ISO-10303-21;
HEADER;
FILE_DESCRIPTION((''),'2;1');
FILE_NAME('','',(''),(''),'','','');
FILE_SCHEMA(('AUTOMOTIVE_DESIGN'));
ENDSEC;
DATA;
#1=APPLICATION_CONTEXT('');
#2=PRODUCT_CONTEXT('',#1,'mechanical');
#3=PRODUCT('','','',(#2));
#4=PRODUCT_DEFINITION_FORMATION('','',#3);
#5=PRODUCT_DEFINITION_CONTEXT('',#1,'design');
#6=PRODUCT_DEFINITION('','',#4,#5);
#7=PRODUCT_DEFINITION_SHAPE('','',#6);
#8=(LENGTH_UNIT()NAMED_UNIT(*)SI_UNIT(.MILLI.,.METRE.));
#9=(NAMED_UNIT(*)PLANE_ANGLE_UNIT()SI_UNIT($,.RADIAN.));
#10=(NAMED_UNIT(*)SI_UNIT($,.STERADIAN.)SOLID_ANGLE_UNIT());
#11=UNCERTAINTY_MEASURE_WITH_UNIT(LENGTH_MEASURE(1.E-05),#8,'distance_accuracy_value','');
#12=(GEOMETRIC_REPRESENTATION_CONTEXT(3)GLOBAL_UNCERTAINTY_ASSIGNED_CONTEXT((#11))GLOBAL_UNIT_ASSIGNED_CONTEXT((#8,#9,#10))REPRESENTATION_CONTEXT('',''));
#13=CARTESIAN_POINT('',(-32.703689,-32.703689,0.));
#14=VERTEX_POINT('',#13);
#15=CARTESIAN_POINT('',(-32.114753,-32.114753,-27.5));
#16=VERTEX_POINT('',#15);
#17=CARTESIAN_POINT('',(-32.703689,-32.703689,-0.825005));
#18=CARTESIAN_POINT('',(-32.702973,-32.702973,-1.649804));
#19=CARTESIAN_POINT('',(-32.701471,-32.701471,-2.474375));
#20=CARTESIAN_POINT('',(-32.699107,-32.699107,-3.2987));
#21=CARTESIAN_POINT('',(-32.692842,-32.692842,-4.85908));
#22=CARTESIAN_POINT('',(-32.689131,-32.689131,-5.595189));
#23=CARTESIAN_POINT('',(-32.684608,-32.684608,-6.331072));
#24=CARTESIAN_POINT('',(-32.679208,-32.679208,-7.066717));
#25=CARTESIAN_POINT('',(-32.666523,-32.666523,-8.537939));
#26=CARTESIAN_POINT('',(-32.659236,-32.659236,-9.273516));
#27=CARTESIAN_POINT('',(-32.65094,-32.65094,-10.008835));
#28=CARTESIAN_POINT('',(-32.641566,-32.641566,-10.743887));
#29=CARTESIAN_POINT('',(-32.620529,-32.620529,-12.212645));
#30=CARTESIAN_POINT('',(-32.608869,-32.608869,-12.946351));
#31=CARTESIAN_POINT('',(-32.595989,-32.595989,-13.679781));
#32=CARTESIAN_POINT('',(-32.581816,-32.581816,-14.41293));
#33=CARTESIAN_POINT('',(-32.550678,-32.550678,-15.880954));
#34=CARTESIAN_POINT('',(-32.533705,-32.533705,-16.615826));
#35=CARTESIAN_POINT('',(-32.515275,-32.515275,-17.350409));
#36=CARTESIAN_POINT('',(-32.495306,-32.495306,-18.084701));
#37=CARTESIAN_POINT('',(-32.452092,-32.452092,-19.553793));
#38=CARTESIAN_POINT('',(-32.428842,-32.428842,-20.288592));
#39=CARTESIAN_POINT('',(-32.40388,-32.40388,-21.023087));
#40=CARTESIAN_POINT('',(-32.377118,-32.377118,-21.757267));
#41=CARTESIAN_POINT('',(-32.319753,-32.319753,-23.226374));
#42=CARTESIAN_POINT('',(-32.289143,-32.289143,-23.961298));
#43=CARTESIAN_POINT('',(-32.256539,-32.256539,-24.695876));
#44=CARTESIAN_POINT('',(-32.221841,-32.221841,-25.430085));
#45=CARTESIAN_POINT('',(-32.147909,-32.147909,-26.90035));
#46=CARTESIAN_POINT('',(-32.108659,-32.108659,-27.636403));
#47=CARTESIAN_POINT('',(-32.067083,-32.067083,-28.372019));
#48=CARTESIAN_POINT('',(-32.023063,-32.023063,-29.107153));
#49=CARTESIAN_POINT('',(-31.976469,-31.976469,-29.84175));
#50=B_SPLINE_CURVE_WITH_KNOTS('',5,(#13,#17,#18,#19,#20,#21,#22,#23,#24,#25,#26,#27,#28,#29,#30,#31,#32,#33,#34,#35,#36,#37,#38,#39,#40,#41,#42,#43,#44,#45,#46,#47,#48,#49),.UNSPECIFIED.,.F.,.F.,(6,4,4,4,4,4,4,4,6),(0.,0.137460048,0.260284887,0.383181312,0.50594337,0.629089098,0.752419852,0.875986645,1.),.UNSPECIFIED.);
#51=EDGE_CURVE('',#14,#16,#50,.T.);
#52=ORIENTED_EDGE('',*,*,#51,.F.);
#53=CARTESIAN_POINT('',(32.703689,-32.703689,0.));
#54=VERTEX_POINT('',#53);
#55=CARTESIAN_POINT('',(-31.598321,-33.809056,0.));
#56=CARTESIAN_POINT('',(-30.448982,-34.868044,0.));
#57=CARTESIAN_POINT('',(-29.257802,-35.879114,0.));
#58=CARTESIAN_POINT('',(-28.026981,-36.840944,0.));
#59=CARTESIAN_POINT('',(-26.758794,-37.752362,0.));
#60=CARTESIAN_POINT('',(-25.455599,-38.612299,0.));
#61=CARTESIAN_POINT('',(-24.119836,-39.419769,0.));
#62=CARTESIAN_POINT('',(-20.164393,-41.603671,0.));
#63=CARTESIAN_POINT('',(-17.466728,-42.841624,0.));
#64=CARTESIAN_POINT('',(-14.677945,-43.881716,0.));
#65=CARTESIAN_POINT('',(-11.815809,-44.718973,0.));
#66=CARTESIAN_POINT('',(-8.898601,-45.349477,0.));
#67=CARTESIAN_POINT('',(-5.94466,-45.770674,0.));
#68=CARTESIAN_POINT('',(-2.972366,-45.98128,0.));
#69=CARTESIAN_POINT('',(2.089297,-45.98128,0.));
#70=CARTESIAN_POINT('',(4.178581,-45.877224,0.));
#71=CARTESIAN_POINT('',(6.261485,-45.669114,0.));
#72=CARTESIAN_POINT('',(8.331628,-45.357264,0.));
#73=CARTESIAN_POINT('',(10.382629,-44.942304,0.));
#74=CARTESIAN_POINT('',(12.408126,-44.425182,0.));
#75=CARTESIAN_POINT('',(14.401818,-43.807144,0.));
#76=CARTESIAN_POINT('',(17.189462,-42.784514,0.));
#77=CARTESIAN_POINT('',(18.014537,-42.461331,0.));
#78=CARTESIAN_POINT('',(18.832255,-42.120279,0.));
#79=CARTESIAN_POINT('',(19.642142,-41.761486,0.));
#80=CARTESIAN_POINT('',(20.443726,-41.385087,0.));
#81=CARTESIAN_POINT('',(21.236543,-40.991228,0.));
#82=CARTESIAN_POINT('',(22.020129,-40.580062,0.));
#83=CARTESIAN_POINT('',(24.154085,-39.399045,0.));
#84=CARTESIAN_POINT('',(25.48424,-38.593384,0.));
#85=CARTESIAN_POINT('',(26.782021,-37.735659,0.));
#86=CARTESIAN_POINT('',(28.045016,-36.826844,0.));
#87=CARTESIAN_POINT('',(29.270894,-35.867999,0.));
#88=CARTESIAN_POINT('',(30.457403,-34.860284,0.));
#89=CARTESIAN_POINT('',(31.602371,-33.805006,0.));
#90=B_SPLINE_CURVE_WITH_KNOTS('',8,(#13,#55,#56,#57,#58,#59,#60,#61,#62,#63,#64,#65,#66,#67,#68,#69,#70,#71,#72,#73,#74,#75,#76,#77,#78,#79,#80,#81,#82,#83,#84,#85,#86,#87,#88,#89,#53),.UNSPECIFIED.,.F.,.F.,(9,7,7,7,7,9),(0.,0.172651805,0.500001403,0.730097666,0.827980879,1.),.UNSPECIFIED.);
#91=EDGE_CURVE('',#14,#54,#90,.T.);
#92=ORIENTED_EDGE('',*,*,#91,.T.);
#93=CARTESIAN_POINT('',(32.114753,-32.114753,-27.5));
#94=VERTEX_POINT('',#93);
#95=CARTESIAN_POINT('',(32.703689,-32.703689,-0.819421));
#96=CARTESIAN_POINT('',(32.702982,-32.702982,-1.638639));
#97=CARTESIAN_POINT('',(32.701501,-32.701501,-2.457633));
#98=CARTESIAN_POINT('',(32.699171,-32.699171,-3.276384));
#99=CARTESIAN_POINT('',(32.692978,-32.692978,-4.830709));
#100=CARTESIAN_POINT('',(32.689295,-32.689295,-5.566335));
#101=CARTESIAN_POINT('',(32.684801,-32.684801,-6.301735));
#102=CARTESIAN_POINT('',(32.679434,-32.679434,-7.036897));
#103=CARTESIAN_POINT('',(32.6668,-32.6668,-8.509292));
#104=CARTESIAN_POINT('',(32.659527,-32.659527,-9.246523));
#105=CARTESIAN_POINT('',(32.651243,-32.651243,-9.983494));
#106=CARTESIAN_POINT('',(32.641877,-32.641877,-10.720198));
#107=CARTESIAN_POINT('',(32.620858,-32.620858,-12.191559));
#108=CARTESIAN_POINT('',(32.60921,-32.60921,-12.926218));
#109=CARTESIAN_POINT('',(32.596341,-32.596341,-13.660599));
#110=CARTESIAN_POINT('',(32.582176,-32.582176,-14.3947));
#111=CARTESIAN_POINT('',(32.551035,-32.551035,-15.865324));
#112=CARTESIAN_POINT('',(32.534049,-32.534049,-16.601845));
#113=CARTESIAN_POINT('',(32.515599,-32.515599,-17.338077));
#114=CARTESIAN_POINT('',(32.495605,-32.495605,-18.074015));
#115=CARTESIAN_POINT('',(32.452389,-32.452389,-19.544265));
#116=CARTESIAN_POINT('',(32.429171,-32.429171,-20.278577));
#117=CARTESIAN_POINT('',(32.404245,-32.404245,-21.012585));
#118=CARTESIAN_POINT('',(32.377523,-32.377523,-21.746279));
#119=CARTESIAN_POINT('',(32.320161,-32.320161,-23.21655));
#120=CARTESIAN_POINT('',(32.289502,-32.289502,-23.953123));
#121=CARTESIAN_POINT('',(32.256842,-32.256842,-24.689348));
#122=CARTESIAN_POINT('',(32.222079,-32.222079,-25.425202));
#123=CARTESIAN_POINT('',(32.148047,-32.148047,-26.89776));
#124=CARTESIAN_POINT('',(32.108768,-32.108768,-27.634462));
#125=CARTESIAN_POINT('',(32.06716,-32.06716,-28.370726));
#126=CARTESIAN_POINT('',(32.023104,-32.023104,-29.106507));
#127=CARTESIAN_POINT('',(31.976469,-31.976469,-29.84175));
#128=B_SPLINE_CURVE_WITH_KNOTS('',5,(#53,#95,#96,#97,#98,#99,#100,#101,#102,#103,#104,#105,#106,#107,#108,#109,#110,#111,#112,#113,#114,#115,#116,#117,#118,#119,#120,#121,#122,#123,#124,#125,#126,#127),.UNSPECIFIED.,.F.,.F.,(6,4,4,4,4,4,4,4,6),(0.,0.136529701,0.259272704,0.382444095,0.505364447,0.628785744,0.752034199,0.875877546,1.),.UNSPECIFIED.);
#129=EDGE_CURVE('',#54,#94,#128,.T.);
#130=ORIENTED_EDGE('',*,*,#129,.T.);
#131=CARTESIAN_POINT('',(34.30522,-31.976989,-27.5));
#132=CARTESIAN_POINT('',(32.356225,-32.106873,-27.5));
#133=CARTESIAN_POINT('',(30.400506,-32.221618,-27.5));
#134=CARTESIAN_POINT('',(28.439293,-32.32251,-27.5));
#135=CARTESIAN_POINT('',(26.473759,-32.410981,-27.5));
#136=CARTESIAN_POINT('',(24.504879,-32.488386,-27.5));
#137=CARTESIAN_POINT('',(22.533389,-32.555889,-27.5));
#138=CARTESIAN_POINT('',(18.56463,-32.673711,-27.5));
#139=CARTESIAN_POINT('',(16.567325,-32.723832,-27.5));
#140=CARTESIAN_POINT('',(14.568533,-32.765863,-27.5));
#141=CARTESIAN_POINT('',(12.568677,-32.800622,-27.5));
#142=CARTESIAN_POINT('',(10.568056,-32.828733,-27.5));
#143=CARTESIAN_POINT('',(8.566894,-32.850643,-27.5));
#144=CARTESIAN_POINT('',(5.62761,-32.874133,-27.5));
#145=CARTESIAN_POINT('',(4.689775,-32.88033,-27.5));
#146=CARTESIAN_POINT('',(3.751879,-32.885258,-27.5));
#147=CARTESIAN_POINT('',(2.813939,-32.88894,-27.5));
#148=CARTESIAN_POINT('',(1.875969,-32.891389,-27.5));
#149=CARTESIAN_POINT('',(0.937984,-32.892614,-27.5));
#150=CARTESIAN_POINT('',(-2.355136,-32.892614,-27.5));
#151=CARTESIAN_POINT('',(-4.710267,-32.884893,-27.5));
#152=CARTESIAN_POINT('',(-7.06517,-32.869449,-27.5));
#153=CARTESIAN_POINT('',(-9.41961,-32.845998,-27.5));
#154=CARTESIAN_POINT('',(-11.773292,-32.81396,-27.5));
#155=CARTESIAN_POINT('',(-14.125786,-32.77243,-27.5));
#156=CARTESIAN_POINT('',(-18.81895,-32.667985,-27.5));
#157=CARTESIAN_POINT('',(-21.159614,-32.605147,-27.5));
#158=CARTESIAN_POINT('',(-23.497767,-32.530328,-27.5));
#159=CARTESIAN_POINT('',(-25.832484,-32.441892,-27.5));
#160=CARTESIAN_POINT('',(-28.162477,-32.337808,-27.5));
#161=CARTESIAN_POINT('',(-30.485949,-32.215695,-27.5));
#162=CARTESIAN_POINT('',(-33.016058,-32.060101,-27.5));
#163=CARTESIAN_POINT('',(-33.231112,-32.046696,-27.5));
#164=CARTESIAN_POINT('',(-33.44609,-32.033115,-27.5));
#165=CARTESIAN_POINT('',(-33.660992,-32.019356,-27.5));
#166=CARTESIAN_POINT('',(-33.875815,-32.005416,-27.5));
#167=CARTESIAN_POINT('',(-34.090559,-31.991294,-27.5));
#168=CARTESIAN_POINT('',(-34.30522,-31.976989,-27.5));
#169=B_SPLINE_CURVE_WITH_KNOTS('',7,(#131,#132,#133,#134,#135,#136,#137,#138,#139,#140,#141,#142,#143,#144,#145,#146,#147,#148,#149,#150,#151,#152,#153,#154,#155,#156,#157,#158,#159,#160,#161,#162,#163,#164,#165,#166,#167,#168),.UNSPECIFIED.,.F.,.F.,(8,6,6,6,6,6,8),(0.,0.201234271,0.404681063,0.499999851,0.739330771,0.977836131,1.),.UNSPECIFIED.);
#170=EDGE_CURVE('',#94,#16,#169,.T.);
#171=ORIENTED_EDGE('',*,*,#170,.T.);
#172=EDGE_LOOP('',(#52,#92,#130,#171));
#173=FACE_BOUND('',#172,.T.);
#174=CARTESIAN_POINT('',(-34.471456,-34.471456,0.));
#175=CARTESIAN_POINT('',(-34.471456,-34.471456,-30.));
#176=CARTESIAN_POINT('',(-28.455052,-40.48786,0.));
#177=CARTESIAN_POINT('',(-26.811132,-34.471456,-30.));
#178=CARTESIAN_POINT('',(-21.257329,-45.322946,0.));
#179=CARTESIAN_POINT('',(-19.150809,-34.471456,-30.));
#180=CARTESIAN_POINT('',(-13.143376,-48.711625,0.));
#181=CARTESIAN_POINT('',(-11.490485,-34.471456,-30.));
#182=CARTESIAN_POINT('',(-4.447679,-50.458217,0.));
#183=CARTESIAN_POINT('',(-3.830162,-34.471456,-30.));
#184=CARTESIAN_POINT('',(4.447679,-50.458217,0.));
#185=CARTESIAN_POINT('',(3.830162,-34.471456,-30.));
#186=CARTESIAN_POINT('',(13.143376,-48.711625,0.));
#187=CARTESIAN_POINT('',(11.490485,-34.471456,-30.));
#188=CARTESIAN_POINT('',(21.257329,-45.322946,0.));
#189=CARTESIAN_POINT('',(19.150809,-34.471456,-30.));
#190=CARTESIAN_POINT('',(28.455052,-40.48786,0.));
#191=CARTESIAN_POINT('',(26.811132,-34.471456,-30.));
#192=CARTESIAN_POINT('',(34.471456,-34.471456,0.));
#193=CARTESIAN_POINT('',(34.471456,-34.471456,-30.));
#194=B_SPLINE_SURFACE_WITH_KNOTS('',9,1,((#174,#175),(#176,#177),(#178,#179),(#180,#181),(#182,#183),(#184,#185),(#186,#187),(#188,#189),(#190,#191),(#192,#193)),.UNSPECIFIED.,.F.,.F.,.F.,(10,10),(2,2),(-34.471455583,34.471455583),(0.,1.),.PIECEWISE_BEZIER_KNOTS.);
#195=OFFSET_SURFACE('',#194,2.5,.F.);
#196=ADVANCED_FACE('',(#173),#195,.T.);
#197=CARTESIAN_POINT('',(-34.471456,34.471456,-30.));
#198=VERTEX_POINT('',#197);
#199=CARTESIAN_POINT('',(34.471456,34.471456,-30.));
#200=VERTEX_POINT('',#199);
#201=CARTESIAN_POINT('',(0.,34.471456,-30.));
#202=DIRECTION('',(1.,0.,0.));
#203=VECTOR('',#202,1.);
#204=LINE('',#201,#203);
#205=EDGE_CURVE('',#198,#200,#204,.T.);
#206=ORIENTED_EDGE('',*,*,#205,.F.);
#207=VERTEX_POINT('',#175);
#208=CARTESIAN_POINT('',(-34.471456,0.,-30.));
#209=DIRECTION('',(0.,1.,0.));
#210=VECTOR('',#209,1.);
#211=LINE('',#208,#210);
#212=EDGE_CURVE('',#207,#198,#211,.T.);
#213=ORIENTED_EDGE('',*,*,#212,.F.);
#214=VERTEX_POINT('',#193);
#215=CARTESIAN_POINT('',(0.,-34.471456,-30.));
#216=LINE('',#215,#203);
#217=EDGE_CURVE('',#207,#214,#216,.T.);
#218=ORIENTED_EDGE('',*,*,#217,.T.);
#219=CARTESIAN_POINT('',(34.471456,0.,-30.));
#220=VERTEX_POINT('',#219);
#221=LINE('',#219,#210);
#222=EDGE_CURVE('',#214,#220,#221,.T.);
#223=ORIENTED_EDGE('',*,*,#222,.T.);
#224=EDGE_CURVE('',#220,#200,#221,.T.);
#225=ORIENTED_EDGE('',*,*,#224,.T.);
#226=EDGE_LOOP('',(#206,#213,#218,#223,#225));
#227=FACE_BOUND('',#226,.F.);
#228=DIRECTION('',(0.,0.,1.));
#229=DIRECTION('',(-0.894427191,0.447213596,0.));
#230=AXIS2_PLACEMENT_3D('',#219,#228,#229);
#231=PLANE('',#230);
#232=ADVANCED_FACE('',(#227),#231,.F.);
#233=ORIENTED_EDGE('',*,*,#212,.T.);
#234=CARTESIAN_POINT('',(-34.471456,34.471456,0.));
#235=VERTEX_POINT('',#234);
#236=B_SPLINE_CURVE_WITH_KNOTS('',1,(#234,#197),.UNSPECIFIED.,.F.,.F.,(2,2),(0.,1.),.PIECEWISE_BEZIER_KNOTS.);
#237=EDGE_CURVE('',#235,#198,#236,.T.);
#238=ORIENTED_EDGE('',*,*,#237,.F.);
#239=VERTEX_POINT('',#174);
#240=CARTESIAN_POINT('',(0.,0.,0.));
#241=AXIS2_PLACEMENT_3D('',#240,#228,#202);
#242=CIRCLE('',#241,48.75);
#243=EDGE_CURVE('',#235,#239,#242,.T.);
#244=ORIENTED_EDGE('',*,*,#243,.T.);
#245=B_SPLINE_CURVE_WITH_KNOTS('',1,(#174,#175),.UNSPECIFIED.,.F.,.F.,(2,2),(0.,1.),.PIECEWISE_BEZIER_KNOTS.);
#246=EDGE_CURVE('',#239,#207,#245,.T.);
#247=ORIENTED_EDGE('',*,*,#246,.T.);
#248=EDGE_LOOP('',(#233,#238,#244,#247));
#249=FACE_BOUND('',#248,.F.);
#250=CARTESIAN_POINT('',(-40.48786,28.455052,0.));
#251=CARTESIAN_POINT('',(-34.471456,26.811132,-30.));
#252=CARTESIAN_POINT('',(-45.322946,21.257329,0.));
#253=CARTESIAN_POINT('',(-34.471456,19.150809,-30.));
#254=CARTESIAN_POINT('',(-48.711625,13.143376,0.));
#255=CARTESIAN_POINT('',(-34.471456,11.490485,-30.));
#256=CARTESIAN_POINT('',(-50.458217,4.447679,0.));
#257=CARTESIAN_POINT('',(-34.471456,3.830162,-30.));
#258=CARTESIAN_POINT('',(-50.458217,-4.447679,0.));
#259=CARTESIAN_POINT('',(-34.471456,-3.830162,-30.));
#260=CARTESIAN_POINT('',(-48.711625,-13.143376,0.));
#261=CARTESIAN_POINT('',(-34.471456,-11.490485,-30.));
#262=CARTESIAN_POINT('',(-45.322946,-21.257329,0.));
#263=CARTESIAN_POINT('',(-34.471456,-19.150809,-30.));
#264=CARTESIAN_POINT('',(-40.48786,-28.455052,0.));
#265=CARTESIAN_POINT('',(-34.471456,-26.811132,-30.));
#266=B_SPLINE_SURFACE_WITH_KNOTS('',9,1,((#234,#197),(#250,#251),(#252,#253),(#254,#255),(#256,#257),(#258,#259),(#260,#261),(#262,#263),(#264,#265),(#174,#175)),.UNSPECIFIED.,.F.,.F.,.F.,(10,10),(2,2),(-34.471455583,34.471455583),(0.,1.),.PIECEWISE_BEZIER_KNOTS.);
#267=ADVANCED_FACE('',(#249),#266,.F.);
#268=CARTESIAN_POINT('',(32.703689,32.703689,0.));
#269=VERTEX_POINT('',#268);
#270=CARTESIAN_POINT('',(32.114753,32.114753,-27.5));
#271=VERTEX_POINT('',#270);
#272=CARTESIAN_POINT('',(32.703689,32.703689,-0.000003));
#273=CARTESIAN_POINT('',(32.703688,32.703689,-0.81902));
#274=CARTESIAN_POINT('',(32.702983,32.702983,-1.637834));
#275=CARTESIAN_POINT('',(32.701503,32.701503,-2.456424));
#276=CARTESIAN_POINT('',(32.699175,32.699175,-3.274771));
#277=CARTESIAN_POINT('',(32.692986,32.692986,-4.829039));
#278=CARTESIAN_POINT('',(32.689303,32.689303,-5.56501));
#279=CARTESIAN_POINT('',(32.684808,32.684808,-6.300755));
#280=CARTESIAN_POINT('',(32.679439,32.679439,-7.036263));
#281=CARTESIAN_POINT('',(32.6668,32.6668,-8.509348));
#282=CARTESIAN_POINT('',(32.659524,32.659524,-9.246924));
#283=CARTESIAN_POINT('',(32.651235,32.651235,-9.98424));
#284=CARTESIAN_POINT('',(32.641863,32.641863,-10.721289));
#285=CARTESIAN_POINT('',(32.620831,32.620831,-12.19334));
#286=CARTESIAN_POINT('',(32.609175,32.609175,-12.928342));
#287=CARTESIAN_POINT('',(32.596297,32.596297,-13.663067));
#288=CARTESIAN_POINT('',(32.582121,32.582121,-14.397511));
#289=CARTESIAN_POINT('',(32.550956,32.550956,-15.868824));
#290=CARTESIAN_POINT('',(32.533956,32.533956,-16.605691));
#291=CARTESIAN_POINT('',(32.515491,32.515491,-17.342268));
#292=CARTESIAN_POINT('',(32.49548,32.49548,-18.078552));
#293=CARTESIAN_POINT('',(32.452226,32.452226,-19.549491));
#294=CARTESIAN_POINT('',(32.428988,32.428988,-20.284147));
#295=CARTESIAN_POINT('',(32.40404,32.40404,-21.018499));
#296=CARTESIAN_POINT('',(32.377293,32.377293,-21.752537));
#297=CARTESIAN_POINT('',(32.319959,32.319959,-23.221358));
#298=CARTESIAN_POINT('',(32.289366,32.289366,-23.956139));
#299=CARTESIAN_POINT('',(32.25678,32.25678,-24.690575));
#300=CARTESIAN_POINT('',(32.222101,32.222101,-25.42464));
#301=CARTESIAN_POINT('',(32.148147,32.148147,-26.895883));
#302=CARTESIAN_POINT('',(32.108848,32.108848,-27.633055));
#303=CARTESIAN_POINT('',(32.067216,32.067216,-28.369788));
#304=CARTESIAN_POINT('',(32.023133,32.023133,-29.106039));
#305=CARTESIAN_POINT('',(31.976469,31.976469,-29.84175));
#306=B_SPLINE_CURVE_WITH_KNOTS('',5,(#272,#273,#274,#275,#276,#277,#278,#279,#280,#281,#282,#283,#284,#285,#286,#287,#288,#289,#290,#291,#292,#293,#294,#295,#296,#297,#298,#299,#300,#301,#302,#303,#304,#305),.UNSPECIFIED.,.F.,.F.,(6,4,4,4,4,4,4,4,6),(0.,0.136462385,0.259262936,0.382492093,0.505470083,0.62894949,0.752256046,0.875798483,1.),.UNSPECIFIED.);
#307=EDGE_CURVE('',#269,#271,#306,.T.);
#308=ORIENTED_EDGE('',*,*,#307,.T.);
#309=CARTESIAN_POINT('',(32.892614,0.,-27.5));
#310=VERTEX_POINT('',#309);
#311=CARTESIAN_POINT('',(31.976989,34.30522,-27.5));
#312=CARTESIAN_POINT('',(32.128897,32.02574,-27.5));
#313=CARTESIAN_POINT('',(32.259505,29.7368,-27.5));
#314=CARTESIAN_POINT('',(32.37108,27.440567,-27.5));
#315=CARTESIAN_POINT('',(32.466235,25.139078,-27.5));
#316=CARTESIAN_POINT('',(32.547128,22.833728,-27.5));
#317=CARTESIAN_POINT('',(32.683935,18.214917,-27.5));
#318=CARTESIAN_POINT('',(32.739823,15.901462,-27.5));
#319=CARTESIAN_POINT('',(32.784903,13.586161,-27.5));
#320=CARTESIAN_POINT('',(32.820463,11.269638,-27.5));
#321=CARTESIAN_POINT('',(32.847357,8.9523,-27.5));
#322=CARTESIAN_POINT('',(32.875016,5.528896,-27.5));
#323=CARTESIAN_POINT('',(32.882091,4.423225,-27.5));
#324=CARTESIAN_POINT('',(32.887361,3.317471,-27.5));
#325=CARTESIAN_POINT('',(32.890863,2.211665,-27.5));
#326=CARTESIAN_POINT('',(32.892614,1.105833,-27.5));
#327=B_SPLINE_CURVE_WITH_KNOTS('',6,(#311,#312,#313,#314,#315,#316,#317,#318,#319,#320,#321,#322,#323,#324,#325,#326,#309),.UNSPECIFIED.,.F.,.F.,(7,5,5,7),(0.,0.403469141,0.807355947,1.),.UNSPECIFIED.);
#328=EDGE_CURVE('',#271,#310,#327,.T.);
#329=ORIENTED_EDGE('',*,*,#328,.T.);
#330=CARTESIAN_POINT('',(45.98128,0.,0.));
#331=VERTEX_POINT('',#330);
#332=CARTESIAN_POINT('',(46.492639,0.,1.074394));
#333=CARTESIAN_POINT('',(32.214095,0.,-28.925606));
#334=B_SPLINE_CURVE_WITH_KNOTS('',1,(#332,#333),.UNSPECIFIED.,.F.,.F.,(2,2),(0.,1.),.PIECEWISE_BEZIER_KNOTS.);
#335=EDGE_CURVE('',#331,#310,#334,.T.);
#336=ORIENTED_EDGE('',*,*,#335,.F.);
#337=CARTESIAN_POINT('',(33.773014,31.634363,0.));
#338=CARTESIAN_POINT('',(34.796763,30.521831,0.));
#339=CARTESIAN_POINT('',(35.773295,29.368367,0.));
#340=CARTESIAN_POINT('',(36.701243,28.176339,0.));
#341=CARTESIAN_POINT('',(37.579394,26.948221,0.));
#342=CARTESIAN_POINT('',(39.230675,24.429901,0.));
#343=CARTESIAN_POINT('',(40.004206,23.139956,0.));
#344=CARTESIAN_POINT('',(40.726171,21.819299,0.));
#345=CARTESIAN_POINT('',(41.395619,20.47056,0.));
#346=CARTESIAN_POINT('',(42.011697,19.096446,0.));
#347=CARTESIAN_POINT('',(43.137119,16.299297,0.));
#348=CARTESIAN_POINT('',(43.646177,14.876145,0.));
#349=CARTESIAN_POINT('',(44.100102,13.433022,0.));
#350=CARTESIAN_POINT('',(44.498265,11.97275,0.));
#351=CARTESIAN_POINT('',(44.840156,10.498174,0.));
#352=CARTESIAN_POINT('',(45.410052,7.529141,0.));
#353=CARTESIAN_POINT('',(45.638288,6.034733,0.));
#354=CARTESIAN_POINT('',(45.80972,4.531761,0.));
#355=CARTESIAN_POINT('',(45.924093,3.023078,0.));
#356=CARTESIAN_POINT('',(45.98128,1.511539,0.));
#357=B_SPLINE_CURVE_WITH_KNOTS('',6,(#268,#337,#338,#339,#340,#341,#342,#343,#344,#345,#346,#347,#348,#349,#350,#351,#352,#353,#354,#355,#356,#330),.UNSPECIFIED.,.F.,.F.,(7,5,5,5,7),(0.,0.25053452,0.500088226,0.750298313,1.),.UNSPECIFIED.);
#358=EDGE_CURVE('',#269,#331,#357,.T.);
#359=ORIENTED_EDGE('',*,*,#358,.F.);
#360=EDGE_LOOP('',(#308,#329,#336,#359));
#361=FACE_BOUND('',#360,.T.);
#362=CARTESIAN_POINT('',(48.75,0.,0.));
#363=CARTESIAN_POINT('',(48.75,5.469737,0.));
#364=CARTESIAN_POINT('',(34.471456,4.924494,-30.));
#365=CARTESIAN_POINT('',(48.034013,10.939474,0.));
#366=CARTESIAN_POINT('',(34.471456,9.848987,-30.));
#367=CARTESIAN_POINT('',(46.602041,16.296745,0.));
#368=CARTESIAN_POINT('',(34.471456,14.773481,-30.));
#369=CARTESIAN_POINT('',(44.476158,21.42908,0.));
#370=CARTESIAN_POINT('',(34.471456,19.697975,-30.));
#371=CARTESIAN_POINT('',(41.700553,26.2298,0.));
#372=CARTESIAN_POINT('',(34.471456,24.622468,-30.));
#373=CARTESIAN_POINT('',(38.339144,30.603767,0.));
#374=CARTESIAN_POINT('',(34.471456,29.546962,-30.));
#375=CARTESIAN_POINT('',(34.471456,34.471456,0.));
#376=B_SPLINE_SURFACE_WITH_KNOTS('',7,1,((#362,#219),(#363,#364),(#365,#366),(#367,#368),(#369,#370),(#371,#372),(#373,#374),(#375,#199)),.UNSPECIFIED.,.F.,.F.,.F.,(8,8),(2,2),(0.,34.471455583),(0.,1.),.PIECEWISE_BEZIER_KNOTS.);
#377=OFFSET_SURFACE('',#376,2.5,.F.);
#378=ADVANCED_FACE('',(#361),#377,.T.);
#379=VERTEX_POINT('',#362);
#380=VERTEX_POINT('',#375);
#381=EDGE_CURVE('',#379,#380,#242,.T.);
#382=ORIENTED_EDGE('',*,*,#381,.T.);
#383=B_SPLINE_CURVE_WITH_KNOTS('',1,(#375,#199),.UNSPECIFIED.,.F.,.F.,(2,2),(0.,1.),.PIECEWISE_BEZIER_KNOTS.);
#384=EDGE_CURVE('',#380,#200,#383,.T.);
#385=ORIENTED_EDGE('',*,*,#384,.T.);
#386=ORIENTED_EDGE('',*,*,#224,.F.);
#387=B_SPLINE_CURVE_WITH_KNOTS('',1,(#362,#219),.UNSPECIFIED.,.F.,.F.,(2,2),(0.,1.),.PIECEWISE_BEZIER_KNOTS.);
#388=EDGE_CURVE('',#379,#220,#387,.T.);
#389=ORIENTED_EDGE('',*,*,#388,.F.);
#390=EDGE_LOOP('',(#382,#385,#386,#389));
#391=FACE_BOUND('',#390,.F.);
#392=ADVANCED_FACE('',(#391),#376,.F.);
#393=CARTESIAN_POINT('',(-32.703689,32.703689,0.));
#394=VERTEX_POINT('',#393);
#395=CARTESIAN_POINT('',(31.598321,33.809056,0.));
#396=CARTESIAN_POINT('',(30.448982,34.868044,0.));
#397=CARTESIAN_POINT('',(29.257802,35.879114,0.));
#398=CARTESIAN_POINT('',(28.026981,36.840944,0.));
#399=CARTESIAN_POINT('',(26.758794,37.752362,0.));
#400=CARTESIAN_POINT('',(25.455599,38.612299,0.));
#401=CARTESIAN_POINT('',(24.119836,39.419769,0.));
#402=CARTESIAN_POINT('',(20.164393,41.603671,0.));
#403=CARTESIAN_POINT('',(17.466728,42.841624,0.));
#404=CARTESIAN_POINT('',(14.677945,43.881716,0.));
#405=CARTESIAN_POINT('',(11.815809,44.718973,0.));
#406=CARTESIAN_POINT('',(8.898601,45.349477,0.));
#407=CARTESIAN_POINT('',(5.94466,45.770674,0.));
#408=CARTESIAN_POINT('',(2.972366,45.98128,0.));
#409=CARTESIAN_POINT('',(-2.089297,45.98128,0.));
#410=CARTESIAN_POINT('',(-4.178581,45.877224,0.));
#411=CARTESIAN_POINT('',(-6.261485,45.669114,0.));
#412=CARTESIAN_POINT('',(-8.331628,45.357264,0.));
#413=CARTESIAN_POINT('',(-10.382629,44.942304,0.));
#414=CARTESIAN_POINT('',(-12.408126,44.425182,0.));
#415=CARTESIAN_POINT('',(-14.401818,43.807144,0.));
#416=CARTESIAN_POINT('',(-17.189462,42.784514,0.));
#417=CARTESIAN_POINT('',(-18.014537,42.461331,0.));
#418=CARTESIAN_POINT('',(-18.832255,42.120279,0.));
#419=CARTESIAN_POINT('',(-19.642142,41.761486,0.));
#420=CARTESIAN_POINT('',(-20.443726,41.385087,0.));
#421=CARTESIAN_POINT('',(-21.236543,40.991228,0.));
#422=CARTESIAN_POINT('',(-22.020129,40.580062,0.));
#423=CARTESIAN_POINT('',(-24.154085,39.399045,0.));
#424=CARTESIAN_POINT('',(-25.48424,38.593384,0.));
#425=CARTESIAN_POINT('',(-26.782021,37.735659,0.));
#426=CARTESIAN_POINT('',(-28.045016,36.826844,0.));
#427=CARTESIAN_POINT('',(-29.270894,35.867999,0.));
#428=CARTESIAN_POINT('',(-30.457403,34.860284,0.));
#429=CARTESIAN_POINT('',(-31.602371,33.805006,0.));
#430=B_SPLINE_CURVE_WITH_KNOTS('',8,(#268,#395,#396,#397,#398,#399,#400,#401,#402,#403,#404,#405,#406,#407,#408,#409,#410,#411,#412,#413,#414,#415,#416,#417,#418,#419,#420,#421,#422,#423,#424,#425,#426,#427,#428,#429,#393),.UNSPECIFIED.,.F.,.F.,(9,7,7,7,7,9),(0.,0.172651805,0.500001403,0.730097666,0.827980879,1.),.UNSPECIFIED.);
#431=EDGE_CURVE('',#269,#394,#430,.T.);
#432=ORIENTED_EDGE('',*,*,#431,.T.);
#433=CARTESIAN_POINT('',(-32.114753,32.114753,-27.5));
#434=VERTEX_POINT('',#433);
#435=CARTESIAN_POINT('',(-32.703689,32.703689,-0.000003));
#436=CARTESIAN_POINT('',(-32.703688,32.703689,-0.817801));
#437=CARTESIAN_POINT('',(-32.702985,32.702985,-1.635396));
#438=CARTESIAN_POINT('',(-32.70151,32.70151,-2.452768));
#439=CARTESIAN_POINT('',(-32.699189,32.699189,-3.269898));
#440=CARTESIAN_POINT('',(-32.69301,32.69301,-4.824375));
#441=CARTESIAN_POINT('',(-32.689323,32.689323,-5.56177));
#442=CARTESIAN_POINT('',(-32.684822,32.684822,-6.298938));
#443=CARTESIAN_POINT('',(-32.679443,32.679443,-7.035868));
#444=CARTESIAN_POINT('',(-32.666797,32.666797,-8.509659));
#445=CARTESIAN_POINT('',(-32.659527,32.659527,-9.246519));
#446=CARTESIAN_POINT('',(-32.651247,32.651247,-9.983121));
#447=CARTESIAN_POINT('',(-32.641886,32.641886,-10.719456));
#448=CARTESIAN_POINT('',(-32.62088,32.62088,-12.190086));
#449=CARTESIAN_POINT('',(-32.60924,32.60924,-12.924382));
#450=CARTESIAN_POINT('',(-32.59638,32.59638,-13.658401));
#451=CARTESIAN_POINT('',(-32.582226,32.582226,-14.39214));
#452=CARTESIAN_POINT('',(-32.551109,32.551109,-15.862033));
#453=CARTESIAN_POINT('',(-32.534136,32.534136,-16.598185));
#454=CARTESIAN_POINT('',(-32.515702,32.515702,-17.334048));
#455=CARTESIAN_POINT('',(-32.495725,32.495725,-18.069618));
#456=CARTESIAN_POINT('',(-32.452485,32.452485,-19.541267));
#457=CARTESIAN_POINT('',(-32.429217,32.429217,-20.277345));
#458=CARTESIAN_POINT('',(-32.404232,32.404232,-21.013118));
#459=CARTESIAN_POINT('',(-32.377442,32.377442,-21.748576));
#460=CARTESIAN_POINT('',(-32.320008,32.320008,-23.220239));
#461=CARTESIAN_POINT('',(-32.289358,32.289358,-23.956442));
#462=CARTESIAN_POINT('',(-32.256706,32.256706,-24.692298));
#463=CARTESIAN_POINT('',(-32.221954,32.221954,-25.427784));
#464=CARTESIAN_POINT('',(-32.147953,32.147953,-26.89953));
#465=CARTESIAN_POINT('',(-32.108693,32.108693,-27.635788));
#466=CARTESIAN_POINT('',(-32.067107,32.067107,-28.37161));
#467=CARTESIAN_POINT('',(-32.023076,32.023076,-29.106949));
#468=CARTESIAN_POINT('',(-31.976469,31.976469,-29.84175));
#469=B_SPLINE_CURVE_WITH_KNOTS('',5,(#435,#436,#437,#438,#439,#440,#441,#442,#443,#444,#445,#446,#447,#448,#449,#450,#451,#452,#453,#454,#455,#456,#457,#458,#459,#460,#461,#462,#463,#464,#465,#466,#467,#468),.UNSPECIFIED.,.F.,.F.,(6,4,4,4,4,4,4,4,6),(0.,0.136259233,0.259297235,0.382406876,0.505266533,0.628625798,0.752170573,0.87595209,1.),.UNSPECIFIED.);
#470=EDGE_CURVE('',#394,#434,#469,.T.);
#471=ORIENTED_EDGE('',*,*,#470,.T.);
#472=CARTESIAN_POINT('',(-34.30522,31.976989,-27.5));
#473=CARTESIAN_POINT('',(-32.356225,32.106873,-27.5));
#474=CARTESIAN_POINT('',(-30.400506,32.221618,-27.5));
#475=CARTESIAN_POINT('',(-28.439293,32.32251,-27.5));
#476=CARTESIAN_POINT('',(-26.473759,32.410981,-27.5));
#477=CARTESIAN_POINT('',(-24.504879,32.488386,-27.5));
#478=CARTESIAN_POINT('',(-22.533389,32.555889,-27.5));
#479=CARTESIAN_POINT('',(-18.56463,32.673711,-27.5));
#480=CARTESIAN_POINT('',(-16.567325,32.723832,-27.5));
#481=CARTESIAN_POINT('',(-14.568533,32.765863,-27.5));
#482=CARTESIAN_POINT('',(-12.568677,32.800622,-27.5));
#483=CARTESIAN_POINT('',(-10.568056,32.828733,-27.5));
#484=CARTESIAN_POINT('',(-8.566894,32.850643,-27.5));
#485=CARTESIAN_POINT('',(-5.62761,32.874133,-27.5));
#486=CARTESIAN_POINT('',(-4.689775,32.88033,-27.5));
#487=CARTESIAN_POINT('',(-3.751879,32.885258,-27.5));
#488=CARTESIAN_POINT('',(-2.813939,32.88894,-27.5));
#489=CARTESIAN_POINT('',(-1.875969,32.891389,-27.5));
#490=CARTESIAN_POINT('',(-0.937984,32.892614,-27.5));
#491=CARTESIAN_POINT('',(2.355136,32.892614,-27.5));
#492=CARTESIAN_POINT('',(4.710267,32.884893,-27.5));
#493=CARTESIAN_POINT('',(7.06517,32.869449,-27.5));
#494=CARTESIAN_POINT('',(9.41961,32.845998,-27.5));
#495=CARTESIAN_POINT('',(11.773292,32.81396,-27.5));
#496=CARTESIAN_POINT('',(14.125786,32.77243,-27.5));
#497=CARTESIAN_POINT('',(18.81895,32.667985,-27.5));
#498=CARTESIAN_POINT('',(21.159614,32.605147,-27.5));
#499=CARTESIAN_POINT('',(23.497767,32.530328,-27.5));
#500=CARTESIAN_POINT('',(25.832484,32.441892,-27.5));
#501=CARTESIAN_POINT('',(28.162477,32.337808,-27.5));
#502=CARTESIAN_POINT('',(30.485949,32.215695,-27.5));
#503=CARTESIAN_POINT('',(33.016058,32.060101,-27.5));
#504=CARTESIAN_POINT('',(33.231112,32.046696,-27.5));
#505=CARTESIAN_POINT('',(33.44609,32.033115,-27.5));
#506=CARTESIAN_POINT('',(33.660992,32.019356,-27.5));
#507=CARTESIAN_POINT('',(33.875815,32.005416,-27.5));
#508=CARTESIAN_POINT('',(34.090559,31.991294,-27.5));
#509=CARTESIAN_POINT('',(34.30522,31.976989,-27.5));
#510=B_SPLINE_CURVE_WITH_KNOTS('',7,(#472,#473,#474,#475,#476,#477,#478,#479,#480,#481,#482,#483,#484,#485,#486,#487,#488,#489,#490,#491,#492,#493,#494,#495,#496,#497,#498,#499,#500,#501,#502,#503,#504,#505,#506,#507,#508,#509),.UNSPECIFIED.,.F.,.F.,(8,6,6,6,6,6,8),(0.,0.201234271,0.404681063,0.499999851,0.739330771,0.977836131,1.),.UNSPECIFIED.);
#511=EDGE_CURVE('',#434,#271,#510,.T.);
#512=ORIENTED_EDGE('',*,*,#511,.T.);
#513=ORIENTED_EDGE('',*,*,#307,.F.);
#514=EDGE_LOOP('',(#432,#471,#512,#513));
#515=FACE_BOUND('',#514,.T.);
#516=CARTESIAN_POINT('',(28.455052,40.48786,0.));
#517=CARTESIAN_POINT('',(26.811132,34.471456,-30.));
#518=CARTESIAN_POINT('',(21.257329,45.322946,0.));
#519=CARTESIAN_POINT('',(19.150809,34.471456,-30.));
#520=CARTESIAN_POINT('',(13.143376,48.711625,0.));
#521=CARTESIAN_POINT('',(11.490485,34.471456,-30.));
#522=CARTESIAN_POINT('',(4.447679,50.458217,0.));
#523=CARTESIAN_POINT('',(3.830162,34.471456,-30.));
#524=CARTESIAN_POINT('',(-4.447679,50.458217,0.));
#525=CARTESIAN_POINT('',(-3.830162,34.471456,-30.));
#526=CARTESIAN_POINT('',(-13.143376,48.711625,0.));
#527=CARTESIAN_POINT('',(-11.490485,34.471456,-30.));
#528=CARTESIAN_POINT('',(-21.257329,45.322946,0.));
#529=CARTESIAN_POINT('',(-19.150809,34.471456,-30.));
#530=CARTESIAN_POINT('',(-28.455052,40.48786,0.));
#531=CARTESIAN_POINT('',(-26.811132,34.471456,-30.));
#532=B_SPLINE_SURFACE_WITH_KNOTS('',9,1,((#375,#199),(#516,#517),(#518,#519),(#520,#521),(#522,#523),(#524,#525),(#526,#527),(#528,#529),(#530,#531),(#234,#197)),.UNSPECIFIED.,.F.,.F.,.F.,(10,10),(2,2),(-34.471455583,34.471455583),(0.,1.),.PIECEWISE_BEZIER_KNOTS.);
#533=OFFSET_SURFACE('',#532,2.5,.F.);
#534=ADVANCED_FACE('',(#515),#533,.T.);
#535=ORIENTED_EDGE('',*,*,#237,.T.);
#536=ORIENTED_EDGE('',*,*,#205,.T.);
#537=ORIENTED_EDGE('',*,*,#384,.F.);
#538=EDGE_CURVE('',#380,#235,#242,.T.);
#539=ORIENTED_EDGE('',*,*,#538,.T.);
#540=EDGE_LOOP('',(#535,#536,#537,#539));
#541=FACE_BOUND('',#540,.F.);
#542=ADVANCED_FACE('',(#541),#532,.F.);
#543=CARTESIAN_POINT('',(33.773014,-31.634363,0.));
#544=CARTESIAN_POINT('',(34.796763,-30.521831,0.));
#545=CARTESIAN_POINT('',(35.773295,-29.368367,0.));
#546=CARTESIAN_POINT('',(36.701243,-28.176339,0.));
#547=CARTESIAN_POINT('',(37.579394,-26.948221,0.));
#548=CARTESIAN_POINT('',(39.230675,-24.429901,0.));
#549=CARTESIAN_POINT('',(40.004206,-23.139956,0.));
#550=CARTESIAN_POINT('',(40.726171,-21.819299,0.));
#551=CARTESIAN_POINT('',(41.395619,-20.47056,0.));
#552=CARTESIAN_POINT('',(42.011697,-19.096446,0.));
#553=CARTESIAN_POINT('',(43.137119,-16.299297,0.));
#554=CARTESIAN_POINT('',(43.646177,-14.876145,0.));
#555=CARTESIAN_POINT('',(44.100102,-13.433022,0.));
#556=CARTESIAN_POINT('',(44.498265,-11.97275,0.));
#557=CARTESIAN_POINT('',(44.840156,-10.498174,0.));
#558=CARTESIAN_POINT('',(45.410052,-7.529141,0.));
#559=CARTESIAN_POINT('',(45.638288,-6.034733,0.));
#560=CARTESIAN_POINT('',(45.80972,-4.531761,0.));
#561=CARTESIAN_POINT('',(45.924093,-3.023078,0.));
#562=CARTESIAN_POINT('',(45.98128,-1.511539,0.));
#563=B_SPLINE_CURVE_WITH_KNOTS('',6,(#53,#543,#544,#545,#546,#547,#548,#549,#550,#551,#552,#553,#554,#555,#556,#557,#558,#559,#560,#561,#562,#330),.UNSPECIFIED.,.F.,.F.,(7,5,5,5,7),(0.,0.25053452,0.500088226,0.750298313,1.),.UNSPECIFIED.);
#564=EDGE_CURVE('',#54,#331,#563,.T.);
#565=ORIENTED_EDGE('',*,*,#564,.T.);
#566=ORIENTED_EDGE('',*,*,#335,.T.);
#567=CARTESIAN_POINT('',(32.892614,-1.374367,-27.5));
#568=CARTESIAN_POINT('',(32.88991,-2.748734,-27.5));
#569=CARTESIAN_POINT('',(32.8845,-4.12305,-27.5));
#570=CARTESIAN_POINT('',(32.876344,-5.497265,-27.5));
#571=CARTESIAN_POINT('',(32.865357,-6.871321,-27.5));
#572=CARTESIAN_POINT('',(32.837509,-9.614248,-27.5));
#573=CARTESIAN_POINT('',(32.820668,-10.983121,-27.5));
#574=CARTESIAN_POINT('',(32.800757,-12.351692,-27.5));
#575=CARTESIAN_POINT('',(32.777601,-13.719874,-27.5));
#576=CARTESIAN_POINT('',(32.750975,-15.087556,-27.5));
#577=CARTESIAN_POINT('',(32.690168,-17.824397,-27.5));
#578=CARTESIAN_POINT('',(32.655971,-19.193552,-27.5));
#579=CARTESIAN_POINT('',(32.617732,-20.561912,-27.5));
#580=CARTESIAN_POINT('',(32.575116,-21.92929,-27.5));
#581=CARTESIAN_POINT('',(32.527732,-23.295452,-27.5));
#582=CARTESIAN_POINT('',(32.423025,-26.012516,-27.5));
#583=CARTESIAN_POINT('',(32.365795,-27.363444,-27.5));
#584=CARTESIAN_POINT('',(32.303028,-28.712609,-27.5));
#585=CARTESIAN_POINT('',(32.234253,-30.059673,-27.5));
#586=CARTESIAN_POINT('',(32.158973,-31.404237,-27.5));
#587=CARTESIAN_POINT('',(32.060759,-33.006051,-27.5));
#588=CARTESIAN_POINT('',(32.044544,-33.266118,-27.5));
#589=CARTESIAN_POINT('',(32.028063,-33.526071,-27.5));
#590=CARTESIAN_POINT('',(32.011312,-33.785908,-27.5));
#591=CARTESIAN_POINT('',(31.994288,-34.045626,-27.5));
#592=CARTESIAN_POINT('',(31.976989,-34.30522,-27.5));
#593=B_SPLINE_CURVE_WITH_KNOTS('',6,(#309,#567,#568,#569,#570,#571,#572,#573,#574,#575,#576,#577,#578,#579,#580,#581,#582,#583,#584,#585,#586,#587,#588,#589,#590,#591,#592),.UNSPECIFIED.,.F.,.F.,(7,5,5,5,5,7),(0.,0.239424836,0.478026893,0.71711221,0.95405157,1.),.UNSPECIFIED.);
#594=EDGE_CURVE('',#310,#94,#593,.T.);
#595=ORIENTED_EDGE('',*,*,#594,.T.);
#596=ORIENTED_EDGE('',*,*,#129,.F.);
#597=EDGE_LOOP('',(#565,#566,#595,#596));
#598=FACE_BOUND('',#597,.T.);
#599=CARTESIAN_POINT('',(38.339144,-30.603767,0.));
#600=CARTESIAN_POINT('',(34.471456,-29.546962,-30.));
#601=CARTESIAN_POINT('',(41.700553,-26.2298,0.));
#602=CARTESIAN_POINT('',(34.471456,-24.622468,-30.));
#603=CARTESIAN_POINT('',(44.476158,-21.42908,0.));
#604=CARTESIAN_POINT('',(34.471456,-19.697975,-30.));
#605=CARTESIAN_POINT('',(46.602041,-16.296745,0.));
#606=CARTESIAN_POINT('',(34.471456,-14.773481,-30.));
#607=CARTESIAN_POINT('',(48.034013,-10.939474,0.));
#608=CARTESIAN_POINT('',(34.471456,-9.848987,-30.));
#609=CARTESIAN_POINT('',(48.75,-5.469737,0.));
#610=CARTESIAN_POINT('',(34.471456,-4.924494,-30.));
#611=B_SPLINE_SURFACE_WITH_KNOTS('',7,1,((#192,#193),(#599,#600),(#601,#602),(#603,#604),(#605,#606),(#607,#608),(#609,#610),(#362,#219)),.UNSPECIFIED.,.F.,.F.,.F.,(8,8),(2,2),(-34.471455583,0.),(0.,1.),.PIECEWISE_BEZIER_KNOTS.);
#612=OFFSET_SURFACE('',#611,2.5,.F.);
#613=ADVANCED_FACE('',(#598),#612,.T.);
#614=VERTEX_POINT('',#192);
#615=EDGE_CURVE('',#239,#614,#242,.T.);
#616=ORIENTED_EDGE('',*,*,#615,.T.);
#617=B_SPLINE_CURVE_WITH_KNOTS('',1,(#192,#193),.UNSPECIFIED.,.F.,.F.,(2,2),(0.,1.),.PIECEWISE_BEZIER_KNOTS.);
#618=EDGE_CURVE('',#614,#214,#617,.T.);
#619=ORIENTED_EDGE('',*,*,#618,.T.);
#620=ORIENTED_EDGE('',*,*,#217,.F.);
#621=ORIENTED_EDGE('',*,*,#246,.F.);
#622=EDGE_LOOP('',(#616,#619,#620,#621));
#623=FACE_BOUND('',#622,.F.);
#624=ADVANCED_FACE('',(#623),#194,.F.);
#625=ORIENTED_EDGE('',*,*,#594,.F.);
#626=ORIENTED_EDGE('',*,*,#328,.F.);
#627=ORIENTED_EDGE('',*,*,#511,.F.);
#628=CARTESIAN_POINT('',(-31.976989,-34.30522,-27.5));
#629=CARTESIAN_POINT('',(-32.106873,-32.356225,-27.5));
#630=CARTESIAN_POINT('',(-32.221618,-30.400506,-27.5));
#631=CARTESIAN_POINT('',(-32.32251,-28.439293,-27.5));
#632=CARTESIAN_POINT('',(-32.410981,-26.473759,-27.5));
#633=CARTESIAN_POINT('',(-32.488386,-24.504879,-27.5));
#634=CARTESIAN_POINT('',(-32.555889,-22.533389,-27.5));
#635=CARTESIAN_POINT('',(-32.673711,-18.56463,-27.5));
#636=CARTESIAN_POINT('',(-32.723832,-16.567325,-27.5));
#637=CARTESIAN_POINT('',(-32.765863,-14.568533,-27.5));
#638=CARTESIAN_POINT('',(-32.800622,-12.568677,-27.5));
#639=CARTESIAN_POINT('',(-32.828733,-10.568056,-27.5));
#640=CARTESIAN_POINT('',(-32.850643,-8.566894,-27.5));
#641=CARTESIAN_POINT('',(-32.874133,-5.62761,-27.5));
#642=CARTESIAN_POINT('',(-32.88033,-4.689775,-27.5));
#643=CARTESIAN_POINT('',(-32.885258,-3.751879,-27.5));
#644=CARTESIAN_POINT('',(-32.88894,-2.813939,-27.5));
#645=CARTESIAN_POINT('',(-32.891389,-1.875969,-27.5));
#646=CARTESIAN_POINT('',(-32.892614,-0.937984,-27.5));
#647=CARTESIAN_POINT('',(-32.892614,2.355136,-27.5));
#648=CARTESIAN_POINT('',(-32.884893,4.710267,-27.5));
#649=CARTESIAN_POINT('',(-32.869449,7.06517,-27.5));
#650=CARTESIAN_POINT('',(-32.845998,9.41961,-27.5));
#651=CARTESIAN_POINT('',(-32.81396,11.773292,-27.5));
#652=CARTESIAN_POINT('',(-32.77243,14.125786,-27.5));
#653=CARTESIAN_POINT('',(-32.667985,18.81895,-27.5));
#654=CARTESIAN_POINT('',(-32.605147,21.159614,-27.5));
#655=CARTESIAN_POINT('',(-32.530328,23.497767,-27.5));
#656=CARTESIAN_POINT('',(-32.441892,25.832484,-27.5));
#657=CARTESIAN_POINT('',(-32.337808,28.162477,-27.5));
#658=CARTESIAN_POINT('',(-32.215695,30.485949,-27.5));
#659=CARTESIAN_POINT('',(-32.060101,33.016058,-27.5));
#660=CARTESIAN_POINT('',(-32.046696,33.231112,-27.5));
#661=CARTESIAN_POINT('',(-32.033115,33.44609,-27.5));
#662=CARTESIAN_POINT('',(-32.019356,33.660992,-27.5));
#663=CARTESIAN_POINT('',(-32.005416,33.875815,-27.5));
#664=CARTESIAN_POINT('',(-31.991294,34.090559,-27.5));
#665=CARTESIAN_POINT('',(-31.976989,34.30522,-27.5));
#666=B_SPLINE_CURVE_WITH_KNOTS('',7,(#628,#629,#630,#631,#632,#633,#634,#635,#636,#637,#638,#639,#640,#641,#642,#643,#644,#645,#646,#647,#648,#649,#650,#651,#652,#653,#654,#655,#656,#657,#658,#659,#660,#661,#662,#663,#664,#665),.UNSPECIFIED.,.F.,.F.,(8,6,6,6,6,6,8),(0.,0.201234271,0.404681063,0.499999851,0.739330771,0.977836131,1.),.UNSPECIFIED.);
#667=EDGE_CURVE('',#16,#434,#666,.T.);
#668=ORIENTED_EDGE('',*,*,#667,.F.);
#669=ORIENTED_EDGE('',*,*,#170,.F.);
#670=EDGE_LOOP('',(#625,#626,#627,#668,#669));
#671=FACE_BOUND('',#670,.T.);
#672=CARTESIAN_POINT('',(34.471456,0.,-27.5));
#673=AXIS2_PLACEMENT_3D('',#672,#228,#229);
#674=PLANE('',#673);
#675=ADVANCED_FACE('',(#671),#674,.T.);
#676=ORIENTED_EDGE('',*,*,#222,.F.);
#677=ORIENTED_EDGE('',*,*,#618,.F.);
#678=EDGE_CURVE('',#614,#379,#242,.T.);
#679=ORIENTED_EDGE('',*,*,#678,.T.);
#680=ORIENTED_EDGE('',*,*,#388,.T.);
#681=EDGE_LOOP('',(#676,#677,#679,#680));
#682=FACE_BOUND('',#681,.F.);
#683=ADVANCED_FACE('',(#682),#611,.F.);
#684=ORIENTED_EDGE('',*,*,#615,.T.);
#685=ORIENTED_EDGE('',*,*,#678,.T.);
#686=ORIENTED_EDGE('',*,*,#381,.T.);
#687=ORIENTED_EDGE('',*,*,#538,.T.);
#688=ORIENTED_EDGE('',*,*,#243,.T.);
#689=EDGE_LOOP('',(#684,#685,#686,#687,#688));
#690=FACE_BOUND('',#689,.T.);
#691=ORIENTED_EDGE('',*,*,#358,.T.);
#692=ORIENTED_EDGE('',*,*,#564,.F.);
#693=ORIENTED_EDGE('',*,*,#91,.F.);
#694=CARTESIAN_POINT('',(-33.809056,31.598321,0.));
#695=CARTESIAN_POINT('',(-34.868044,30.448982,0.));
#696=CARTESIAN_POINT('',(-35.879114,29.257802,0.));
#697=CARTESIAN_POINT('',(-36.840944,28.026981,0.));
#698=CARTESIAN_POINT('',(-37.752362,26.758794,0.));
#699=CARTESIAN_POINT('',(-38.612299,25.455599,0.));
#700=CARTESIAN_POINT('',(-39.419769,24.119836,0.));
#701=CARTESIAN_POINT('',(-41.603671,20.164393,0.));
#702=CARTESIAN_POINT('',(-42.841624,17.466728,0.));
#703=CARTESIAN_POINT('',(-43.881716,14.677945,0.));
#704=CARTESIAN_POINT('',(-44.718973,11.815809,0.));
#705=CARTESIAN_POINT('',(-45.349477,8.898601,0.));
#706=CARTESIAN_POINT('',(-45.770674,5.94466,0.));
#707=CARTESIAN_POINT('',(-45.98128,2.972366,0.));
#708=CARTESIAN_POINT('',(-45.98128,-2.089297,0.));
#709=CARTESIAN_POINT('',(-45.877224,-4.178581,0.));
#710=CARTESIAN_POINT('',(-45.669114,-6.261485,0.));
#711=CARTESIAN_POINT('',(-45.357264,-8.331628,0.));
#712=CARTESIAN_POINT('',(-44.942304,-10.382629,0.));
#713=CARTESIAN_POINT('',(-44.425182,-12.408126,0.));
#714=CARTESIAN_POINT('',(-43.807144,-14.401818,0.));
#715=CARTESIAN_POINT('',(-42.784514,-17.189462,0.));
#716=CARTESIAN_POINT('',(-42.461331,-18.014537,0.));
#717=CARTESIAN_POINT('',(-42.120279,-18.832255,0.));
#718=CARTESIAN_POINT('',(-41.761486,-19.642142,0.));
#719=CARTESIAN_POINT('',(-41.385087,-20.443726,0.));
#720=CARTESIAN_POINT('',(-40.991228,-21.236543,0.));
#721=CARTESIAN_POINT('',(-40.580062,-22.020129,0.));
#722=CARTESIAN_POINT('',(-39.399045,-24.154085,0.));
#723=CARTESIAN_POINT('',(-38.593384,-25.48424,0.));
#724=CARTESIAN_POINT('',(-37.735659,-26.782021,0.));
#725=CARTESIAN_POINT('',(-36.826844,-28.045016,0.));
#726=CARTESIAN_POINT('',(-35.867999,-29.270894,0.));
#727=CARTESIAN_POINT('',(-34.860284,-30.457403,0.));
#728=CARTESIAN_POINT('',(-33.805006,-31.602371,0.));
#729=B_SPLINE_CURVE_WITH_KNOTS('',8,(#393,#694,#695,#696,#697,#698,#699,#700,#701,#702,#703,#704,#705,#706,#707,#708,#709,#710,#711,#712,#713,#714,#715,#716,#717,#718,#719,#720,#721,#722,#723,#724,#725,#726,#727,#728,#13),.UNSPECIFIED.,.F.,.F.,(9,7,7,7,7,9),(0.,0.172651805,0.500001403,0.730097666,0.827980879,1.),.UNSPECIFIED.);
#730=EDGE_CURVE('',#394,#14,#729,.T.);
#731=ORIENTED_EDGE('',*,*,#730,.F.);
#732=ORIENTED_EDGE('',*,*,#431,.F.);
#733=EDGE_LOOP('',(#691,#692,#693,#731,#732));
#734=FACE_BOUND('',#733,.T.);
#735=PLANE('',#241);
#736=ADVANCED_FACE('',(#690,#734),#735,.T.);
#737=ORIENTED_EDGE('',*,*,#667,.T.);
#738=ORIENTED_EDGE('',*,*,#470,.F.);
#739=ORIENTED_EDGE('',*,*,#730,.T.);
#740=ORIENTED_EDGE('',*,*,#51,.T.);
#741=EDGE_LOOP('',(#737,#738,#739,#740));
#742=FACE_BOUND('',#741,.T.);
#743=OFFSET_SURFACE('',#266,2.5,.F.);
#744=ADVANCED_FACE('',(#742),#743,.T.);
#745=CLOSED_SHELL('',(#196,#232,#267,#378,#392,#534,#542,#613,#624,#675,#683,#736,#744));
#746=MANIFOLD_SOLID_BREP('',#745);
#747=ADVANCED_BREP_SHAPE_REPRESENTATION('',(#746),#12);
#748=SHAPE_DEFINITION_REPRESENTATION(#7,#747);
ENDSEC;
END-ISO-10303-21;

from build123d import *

# Parameters (mm, degrees)
F0_R = 48.75
F2_W = 68.9429111657
F2_H = 68.9429111657
F4_T = 2.5


# Not quite as in the source:
# - a shell that OpenCascade refuses in one call is made with other operations: the cavity is built on its own and cut out


with BuildPart() as f3:
    # F0 (on Top) → F3 section 0
    with BuildSketch(Plane.XY):
        Circle(F0_R)
    # F2 (on offset) → F3 section 1
    with BuildSketch(Plane.XY.offset(-30)):
        Rectangle(F2_W, F2_H)
    loft()

    # F4: shell of thickness 2.5, made by hand


with BuildPart() as f4_core1:
    # F4_t2: copy of F3
    add(f3.part)

    # the walls: a layer under each face that stays
    f4_faces = [f4_core1.faces().sort_by_distance(p)[0] for p in [
        (39.7552913915, 17.9457725576, -15),
        (0, 41.6107277896, -15),
        (-41.6107277896, 0, -15),
        (0, -41.6107277896, -15),
        (39.7552913915, -17.9457725576, -15),
        (0, 0, -30),
    ]]
    thicken(f4_faces, amount=-F4_T, mode=Mode.SUBTRACT)


with BuildPart() as f3_1:
    add(f3.part)

    # what is left inside the walls is the cavity
    f4_cavity = [f4_core1.part.solids().sort_by_distance(p)[0] for p in [
        (0, -15.327093, -0.025),
    ]]
    add(f4_cavity, mode=Mode.SUBTRACT)


solid = f3_1.part
